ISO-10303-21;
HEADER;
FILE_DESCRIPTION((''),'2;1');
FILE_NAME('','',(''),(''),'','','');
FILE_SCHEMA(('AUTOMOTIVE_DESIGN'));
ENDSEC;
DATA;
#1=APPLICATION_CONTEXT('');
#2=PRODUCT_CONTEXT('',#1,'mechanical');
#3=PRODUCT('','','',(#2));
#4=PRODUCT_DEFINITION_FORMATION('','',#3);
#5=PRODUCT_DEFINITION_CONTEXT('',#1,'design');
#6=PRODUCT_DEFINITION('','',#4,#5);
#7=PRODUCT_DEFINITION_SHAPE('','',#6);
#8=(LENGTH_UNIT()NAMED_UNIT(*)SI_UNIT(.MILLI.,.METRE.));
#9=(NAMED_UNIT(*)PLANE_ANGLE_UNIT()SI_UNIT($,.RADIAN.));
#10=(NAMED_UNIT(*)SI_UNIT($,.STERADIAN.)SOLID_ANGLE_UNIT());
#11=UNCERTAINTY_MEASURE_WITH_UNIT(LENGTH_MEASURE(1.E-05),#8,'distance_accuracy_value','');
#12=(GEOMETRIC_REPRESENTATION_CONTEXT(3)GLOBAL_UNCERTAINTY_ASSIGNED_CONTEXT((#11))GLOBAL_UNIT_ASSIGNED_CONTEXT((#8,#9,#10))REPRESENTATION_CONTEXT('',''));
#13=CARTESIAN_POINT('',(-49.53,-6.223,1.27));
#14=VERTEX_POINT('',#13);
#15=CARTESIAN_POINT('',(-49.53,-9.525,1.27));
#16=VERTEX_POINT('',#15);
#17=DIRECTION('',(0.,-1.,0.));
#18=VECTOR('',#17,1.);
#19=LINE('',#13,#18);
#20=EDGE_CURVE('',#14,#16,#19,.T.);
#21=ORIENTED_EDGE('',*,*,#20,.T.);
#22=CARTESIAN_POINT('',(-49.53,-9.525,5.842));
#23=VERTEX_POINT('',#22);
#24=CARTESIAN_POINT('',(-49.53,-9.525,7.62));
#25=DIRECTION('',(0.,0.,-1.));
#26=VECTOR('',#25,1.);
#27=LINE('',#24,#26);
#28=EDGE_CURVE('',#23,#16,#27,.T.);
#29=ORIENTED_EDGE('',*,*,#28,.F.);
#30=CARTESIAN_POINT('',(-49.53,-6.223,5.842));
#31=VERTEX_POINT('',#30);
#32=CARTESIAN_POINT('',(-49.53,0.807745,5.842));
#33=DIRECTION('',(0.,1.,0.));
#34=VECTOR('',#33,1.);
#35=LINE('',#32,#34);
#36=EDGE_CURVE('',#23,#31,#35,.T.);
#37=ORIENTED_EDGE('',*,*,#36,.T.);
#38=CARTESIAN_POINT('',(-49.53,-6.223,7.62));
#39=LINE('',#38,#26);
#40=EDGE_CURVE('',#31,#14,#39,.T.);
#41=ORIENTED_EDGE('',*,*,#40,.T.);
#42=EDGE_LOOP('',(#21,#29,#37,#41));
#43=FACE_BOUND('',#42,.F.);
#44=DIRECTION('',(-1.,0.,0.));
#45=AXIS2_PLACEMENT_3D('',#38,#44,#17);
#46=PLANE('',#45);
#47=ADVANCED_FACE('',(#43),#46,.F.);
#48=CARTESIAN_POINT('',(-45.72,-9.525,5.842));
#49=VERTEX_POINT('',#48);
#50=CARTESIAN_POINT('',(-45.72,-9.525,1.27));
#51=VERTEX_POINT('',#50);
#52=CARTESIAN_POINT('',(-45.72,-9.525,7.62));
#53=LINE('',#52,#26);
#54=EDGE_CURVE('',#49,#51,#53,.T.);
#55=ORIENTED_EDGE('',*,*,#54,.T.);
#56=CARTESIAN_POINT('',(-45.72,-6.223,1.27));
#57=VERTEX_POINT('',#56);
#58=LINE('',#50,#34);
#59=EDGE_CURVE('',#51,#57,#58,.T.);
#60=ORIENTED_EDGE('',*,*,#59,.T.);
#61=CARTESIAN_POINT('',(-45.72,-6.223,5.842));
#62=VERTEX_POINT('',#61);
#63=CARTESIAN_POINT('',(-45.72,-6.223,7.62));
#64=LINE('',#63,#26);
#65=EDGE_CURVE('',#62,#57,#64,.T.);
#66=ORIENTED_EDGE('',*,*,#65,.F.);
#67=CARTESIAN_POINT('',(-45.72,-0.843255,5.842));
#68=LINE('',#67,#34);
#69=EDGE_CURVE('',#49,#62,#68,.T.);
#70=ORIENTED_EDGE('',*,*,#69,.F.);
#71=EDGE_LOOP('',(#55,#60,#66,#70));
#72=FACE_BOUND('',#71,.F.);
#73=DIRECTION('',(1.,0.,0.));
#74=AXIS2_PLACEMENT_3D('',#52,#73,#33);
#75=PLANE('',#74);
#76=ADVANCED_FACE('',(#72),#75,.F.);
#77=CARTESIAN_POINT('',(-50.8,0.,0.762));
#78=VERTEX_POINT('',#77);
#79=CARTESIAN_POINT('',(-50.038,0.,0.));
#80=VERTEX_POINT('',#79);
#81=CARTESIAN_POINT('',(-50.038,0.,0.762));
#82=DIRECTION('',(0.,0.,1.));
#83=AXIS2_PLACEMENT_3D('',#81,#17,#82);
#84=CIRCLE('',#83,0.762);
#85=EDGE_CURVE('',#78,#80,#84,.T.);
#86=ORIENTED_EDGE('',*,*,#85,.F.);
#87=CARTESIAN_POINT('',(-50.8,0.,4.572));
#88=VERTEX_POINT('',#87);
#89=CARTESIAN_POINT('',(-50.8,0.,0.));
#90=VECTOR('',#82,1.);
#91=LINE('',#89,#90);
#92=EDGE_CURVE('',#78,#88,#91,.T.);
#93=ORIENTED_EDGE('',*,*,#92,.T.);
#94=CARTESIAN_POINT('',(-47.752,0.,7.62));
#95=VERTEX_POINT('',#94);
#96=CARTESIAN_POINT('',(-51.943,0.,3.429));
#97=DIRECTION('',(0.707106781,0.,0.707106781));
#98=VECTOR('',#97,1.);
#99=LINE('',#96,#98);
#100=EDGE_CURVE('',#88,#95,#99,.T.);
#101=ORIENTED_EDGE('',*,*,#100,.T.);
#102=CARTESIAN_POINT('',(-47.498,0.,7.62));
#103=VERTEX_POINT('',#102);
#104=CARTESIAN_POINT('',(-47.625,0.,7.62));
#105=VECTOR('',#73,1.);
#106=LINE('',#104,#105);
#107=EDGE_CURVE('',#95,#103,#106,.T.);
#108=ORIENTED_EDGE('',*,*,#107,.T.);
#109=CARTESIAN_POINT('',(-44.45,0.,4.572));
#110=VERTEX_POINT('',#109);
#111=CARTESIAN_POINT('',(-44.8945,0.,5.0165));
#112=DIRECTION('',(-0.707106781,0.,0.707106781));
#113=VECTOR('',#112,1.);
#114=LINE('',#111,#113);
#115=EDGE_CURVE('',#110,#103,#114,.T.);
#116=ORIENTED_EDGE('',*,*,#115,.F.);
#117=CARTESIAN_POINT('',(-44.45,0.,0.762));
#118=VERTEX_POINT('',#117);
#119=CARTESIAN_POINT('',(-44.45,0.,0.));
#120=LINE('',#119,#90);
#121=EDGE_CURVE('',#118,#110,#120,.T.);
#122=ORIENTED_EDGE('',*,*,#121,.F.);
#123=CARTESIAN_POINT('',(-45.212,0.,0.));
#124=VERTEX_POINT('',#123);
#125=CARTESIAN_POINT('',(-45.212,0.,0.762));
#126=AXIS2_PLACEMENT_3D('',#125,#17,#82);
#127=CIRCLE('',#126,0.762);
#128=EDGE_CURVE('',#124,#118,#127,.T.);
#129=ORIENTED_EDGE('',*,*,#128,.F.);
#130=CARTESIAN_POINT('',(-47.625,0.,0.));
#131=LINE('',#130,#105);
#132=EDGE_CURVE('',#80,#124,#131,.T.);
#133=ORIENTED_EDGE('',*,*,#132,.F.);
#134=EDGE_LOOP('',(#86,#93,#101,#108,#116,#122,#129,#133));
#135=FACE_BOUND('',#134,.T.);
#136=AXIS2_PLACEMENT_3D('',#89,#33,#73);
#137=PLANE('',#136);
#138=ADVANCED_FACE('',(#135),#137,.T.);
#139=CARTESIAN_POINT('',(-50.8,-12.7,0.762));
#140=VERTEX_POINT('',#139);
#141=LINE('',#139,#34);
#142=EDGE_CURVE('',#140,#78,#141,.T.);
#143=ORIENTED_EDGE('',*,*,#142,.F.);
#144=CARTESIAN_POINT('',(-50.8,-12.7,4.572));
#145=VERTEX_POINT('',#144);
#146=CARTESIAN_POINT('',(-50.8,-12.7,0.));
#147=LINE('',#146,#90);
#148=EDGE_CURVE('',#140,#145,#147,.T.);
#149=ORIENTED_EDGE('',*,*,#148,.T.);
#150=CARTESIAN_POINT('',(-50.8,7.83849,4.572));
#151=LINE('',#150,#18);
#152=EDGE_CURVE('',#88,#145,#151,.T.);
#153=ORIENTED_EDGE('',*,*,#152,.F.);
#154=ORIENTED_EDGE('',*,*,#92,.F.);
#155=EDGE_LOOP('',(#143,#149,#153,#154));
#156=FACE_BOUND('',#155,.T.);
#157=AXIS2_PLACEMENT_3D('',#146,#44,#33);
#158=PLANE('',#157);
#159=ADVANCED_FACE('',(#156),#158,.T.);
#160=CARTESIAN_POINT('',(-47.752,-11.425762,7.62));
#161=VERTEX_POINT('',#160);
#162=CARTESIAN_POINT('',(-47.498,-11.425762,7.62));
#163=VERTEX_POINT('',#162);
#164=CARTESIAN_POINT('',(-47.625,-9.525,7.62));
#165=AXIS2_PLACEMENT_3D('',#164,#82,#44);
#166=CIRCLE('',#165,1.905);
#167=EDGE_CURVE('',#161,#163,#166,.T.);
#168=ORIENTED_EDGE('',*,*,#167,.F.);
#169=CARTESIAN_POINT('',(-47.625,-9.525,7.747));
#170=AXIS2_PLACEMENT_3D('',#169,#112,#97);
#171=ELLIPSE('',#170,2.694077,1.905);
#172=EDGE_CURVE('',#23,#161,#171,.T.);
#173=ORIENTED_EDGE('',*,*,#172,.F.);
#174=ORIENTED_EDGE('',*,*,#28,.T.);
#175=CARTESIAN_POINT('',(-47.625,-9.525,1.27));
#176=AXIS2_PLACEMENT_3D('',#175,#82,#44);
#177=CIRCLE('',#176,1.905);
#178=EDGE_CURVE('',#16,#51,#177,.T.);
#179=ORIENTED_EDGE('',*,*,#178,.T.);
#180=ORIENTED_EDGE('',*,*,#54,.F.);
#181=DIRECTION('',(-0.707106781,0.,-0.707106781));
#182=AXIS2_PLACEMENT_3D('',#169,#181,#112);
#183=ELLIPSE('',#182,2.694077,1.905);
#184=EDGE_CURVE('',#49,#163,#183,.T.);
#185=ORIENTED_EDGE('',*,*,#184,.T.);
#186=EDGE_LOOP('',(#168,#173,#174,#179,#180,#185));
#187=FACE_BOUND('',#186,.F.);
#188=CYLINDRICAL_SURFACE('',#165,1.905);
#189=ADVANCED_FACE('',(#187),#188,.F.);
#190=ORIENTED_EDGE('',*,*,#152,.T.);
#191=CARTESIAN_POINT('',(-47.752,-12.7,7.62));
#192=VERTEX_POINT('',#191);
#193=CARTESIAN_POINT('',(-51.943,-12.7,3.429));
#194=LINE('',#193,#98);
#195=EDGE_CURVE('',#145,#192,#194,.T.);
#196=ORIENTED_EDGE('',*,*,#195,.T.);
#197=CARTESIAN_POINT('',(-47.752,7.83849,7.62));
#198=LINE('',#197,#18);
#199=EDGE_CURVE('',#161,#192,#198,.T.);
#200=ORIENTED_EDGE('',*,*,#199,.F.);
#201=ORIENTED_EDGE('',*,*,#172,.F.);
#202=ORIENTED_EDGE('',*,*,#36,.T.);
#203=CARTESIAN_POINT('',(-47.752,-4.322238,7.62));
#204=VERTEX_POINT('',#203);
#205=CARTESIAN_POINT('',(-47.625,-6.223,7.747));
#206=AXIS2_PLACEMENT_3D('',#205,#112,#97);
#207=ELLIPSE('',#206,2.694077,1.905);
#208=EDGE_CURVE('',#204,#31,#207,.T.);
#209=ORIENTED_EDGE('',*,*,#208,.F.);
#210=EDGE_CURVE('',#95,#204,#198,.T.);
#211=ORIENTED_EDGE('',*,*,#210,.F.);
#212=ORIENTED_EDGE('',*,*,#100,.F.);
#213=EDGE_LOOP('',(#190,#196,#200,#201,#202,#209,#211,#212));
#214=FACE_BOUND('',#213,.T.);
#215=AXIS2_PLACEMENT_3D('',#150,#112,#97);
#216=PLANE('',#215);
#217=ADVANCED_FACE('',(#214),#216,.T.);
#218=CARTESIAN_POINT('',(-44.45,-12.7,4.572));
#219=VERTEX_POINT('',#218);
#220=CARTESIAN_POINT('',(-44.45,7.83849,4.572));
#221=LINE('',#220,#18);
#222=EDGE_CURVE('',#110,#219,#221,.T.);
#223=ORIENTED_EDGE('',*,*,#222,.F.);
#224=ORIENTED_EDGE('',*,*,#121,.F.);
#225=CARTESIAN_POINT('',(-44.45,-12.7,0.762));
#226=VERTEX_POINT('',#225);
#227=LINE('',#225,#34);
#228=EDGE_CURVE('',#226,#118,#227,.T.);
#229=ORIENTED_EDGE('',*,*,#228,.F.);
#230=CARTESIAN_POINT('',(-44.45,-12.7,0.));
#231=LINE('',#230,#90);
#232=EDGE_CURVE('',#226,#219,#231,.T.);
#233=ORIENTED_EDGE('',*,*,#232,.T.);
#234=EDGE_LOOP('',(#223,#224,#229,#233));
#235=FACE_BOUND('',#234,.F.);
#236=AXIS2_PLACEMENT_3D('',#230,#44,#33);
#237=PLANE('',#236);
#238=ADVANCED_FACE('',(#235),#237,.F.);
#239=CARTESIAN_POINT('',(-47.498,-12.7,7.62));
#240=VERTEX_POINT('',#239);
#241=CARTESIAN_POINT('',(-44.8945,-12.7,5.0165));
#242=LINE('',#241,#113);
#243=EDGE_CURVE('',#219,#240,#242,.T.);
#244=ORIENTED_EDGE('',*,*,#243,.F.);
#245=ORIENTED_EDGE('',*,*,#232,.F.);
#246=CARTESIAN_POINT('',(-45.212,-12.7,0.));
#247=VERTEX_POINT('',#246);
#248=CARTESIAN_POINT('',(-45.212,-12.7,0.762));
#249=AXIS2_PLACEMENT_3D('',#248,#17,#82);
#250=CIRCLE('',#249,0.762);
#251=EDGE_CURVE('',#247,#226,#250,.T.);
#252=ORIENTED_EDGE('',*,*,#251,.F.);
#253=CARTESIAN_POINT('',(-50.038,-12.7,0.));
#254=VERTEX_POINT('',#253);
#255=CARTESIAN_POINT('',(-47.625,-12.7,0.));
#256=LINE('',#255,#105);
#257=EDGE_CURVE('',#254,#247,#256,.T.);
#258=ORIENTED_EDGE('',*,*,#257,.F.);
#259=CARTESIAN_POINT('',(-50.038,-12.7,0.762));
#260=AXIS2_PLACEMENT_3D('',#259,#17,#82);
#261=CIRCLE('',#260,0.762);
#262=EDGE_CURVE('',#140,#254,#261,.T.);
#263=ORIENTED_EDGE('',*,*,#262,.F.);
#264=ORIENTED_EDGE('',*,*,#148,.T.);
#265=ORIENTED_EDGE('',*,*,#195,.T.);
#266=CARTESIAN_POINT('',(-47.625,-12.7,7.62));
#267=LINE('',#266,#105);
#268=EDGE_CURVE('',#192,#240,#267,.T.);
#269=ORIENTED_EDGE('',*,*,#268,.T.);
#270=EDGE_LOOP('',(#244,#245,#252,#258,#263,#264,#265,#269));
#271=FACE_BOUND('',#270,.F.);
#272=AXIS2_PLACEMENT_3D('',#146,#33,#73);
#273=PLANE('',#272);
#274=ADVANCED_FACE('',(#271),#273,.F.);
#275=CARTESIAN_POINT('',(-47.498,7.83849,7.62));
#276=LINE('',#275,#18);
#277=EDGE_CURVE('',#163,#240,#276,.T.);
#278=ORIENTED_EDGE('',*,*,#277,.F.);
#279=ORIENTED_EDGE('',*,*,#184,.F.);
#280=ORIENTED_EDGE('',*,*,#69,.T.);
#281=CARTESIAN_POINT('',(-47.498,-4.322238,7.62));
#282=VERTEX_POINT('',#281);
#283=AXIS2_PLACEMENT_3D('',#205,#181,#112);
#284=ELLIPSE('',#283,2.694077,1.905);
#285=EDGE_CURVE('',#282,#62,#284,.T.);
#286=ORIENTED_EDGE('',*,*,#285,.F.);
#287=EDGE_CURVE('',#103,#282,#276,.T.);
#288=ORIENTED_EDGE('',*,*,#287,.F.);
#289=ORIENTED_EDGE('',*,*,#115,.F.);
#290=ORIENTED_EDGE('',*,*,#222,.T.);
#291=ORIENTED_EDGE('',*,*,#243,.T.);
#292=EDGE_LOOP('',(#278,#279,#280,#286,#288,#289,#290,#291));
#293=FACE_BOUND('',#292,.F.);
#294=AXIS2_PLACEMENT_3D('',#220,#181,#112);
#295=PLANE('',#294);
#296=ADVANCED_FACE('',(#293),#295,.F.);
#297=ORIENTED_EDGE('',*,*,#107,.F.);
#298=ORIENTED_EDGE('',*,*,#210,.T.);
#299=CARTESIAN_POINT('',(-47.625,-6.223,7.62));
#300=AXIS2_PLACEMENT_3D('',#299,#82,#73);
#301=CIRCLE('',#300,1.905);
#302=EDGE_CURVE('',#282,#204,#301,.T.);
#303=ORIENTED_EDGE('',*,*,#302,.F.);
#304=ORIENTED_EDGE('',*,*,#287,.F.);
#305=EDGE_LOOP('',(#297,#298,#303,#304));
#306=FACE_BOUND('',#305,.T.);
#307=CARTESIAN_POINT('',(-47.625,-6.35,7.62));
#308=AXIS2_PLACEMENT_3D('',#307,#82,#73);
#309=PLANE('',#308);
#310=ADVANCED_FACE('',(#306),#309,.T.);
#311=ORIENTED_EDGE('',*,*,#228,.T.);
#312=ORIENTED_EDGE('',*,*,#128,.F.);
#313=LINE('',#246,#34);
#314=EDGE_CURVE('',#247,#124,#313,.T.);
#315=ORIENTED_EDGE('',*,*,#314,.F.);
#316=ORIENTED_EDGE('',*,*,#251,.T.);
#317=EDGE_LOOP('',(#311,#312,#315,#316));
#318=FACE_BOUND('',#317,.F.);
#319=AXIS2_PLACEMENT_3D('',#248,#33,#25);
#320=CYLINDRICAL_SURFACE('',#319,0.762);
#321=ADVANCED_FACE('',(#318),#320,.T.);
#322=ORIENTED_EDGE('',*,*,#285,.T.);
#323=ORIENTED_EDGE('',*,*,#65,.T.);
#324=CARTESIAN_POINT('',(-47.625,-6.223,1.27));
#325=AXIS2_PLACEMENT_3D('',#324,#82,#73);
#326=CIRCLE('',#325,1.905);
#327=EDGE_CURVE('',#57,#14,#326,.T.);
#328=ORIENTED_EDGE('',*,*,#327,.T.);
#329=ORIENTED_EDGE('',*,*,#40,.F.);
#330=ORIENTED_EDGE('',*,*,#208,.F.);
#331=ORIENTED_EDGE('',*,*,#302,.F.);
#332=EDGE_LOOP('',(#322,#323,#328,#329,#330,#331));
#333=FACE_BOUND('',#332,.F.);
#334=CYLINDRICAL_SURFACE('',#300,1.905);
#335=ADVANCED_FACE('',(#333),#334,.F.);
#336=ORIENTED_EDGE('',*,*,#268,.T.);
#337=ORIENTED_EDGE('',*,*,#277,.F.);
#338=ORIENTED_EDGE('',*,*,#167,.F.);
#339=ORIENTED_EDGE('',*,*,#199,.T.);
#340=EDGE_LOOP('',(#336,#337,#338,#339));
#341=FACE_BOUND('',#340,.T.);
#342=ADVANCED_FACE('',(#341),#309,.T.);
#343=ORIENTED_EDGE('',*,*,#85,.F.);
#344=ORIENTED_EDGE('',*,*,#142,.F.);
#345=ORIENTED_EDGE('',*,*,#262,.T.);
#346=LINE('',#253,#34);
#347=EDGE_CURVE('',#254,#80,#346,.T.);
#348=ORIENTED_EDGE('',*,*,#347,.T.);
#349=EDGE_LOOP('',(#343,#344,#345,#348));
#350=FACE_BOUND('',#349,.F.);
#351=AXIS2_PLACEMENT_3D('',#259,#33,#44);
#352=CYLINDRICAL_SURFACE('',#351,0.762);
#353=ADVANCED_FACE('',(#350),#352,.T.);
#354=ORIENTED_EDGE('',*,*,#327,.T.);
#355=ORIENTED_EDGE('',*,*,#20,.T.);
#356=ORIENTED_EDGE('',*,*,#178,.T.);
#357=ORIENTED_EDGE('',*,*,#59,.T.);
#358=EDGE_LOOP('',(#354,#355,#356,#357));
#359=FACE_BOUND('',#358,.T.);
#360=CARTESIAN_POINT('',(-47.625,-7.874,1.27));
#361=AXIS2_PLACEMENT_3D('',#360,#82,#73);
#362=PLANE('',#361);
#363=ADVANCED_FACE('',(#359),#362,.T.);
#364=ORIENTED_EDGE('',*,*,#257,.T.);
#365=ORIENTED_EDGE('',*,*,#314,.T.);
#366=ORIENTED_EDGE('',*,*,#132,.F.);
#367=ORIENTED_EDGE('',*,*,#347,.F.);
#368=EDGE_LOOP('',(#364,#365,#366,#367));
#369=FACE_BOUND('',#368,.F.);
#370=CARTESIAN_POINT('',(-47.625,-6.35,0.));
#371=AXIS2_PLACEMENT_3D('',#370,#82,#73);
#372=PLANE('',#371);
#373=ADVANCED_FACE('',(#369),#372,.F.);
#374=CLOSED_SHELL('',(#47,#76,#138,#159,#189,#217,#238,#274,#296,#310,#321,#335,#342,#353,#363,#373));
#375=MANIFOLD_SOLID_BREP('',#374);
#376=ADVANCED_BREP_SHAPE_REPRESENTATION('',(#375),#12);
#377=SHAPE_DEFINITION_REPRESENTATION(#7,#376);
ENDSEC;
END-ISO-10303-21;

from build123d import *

# Parameters (mm, degrees)
F0_W        = 6.35
F0_H        = 12.7
F1_DEPTH    = 7.62
F3_DEPTH    = 6.35
F4_T1_DEPTH = 28.3769794946
F5_R        = 0.762


# Not quite as in the source:
# - a fillet or chamfer that OpenCascade refuses, or shapes differently, is made with other operations: its cross-section is extruded or revolved along the edge and cut away or added
# - a feature names something its author has since deleted; it is built from what else it names


with BuildPart() as f1:
    # F0 (on Top) → F1 (new body)
    with BuildSketch(Plane.XY):
        with Locations((-47.625, -6.35)):
            Rectangle(F0_W, F0_H)
    extrude(amount=F1_DEPTH)

    # F2 (on face) → F3 (cut)
    with BuildSketch(Plane.XY.offset(7.62)):
        with BuildLine():
            ThreePointArc((-45.72, -6.223), (-47.625, -4.318), (-49.53, -6.223))
            Line((-49.53, -6.223), (-49.53, -9.525))
            ThreePointArc((-49.53, -9.525), (-47.625, -11.43), (-45.72, -9.525))
            Line((-45.72, -9.525), (-45.72, -6.223))
        make_face()
    extrude(amount=-F3_DEPTH, mode=Mode.SUBTRACT)

    # F4: chamfer of 3.048 on 2 edges, made by hand

    # F4_s2 → F4_t1 (cut)
    with BuildSketch(Plane.XZ.offset(-7.8384897473)):
        Polygon((-50.8, 4.572), (-47.752, 7.62), (-50.8, 7.62), align=None)
        Polygon((-44.45, 4.572), (-47.498, 7.62), (-44.45, 7.62), align=None)
    extrude(amount=F4_T1_DEPTH, mode=Mode.SUBTRACT)

    # F5
    f5_edges = [f1.edges().sort_by_distance(p)[0] for p in [
        (-50.8, -6.35, 0),
        (-44.45, -6.35, 0),
    ]]
    fillet(f5_edges, radius=F5_R)


solid = f1.part
